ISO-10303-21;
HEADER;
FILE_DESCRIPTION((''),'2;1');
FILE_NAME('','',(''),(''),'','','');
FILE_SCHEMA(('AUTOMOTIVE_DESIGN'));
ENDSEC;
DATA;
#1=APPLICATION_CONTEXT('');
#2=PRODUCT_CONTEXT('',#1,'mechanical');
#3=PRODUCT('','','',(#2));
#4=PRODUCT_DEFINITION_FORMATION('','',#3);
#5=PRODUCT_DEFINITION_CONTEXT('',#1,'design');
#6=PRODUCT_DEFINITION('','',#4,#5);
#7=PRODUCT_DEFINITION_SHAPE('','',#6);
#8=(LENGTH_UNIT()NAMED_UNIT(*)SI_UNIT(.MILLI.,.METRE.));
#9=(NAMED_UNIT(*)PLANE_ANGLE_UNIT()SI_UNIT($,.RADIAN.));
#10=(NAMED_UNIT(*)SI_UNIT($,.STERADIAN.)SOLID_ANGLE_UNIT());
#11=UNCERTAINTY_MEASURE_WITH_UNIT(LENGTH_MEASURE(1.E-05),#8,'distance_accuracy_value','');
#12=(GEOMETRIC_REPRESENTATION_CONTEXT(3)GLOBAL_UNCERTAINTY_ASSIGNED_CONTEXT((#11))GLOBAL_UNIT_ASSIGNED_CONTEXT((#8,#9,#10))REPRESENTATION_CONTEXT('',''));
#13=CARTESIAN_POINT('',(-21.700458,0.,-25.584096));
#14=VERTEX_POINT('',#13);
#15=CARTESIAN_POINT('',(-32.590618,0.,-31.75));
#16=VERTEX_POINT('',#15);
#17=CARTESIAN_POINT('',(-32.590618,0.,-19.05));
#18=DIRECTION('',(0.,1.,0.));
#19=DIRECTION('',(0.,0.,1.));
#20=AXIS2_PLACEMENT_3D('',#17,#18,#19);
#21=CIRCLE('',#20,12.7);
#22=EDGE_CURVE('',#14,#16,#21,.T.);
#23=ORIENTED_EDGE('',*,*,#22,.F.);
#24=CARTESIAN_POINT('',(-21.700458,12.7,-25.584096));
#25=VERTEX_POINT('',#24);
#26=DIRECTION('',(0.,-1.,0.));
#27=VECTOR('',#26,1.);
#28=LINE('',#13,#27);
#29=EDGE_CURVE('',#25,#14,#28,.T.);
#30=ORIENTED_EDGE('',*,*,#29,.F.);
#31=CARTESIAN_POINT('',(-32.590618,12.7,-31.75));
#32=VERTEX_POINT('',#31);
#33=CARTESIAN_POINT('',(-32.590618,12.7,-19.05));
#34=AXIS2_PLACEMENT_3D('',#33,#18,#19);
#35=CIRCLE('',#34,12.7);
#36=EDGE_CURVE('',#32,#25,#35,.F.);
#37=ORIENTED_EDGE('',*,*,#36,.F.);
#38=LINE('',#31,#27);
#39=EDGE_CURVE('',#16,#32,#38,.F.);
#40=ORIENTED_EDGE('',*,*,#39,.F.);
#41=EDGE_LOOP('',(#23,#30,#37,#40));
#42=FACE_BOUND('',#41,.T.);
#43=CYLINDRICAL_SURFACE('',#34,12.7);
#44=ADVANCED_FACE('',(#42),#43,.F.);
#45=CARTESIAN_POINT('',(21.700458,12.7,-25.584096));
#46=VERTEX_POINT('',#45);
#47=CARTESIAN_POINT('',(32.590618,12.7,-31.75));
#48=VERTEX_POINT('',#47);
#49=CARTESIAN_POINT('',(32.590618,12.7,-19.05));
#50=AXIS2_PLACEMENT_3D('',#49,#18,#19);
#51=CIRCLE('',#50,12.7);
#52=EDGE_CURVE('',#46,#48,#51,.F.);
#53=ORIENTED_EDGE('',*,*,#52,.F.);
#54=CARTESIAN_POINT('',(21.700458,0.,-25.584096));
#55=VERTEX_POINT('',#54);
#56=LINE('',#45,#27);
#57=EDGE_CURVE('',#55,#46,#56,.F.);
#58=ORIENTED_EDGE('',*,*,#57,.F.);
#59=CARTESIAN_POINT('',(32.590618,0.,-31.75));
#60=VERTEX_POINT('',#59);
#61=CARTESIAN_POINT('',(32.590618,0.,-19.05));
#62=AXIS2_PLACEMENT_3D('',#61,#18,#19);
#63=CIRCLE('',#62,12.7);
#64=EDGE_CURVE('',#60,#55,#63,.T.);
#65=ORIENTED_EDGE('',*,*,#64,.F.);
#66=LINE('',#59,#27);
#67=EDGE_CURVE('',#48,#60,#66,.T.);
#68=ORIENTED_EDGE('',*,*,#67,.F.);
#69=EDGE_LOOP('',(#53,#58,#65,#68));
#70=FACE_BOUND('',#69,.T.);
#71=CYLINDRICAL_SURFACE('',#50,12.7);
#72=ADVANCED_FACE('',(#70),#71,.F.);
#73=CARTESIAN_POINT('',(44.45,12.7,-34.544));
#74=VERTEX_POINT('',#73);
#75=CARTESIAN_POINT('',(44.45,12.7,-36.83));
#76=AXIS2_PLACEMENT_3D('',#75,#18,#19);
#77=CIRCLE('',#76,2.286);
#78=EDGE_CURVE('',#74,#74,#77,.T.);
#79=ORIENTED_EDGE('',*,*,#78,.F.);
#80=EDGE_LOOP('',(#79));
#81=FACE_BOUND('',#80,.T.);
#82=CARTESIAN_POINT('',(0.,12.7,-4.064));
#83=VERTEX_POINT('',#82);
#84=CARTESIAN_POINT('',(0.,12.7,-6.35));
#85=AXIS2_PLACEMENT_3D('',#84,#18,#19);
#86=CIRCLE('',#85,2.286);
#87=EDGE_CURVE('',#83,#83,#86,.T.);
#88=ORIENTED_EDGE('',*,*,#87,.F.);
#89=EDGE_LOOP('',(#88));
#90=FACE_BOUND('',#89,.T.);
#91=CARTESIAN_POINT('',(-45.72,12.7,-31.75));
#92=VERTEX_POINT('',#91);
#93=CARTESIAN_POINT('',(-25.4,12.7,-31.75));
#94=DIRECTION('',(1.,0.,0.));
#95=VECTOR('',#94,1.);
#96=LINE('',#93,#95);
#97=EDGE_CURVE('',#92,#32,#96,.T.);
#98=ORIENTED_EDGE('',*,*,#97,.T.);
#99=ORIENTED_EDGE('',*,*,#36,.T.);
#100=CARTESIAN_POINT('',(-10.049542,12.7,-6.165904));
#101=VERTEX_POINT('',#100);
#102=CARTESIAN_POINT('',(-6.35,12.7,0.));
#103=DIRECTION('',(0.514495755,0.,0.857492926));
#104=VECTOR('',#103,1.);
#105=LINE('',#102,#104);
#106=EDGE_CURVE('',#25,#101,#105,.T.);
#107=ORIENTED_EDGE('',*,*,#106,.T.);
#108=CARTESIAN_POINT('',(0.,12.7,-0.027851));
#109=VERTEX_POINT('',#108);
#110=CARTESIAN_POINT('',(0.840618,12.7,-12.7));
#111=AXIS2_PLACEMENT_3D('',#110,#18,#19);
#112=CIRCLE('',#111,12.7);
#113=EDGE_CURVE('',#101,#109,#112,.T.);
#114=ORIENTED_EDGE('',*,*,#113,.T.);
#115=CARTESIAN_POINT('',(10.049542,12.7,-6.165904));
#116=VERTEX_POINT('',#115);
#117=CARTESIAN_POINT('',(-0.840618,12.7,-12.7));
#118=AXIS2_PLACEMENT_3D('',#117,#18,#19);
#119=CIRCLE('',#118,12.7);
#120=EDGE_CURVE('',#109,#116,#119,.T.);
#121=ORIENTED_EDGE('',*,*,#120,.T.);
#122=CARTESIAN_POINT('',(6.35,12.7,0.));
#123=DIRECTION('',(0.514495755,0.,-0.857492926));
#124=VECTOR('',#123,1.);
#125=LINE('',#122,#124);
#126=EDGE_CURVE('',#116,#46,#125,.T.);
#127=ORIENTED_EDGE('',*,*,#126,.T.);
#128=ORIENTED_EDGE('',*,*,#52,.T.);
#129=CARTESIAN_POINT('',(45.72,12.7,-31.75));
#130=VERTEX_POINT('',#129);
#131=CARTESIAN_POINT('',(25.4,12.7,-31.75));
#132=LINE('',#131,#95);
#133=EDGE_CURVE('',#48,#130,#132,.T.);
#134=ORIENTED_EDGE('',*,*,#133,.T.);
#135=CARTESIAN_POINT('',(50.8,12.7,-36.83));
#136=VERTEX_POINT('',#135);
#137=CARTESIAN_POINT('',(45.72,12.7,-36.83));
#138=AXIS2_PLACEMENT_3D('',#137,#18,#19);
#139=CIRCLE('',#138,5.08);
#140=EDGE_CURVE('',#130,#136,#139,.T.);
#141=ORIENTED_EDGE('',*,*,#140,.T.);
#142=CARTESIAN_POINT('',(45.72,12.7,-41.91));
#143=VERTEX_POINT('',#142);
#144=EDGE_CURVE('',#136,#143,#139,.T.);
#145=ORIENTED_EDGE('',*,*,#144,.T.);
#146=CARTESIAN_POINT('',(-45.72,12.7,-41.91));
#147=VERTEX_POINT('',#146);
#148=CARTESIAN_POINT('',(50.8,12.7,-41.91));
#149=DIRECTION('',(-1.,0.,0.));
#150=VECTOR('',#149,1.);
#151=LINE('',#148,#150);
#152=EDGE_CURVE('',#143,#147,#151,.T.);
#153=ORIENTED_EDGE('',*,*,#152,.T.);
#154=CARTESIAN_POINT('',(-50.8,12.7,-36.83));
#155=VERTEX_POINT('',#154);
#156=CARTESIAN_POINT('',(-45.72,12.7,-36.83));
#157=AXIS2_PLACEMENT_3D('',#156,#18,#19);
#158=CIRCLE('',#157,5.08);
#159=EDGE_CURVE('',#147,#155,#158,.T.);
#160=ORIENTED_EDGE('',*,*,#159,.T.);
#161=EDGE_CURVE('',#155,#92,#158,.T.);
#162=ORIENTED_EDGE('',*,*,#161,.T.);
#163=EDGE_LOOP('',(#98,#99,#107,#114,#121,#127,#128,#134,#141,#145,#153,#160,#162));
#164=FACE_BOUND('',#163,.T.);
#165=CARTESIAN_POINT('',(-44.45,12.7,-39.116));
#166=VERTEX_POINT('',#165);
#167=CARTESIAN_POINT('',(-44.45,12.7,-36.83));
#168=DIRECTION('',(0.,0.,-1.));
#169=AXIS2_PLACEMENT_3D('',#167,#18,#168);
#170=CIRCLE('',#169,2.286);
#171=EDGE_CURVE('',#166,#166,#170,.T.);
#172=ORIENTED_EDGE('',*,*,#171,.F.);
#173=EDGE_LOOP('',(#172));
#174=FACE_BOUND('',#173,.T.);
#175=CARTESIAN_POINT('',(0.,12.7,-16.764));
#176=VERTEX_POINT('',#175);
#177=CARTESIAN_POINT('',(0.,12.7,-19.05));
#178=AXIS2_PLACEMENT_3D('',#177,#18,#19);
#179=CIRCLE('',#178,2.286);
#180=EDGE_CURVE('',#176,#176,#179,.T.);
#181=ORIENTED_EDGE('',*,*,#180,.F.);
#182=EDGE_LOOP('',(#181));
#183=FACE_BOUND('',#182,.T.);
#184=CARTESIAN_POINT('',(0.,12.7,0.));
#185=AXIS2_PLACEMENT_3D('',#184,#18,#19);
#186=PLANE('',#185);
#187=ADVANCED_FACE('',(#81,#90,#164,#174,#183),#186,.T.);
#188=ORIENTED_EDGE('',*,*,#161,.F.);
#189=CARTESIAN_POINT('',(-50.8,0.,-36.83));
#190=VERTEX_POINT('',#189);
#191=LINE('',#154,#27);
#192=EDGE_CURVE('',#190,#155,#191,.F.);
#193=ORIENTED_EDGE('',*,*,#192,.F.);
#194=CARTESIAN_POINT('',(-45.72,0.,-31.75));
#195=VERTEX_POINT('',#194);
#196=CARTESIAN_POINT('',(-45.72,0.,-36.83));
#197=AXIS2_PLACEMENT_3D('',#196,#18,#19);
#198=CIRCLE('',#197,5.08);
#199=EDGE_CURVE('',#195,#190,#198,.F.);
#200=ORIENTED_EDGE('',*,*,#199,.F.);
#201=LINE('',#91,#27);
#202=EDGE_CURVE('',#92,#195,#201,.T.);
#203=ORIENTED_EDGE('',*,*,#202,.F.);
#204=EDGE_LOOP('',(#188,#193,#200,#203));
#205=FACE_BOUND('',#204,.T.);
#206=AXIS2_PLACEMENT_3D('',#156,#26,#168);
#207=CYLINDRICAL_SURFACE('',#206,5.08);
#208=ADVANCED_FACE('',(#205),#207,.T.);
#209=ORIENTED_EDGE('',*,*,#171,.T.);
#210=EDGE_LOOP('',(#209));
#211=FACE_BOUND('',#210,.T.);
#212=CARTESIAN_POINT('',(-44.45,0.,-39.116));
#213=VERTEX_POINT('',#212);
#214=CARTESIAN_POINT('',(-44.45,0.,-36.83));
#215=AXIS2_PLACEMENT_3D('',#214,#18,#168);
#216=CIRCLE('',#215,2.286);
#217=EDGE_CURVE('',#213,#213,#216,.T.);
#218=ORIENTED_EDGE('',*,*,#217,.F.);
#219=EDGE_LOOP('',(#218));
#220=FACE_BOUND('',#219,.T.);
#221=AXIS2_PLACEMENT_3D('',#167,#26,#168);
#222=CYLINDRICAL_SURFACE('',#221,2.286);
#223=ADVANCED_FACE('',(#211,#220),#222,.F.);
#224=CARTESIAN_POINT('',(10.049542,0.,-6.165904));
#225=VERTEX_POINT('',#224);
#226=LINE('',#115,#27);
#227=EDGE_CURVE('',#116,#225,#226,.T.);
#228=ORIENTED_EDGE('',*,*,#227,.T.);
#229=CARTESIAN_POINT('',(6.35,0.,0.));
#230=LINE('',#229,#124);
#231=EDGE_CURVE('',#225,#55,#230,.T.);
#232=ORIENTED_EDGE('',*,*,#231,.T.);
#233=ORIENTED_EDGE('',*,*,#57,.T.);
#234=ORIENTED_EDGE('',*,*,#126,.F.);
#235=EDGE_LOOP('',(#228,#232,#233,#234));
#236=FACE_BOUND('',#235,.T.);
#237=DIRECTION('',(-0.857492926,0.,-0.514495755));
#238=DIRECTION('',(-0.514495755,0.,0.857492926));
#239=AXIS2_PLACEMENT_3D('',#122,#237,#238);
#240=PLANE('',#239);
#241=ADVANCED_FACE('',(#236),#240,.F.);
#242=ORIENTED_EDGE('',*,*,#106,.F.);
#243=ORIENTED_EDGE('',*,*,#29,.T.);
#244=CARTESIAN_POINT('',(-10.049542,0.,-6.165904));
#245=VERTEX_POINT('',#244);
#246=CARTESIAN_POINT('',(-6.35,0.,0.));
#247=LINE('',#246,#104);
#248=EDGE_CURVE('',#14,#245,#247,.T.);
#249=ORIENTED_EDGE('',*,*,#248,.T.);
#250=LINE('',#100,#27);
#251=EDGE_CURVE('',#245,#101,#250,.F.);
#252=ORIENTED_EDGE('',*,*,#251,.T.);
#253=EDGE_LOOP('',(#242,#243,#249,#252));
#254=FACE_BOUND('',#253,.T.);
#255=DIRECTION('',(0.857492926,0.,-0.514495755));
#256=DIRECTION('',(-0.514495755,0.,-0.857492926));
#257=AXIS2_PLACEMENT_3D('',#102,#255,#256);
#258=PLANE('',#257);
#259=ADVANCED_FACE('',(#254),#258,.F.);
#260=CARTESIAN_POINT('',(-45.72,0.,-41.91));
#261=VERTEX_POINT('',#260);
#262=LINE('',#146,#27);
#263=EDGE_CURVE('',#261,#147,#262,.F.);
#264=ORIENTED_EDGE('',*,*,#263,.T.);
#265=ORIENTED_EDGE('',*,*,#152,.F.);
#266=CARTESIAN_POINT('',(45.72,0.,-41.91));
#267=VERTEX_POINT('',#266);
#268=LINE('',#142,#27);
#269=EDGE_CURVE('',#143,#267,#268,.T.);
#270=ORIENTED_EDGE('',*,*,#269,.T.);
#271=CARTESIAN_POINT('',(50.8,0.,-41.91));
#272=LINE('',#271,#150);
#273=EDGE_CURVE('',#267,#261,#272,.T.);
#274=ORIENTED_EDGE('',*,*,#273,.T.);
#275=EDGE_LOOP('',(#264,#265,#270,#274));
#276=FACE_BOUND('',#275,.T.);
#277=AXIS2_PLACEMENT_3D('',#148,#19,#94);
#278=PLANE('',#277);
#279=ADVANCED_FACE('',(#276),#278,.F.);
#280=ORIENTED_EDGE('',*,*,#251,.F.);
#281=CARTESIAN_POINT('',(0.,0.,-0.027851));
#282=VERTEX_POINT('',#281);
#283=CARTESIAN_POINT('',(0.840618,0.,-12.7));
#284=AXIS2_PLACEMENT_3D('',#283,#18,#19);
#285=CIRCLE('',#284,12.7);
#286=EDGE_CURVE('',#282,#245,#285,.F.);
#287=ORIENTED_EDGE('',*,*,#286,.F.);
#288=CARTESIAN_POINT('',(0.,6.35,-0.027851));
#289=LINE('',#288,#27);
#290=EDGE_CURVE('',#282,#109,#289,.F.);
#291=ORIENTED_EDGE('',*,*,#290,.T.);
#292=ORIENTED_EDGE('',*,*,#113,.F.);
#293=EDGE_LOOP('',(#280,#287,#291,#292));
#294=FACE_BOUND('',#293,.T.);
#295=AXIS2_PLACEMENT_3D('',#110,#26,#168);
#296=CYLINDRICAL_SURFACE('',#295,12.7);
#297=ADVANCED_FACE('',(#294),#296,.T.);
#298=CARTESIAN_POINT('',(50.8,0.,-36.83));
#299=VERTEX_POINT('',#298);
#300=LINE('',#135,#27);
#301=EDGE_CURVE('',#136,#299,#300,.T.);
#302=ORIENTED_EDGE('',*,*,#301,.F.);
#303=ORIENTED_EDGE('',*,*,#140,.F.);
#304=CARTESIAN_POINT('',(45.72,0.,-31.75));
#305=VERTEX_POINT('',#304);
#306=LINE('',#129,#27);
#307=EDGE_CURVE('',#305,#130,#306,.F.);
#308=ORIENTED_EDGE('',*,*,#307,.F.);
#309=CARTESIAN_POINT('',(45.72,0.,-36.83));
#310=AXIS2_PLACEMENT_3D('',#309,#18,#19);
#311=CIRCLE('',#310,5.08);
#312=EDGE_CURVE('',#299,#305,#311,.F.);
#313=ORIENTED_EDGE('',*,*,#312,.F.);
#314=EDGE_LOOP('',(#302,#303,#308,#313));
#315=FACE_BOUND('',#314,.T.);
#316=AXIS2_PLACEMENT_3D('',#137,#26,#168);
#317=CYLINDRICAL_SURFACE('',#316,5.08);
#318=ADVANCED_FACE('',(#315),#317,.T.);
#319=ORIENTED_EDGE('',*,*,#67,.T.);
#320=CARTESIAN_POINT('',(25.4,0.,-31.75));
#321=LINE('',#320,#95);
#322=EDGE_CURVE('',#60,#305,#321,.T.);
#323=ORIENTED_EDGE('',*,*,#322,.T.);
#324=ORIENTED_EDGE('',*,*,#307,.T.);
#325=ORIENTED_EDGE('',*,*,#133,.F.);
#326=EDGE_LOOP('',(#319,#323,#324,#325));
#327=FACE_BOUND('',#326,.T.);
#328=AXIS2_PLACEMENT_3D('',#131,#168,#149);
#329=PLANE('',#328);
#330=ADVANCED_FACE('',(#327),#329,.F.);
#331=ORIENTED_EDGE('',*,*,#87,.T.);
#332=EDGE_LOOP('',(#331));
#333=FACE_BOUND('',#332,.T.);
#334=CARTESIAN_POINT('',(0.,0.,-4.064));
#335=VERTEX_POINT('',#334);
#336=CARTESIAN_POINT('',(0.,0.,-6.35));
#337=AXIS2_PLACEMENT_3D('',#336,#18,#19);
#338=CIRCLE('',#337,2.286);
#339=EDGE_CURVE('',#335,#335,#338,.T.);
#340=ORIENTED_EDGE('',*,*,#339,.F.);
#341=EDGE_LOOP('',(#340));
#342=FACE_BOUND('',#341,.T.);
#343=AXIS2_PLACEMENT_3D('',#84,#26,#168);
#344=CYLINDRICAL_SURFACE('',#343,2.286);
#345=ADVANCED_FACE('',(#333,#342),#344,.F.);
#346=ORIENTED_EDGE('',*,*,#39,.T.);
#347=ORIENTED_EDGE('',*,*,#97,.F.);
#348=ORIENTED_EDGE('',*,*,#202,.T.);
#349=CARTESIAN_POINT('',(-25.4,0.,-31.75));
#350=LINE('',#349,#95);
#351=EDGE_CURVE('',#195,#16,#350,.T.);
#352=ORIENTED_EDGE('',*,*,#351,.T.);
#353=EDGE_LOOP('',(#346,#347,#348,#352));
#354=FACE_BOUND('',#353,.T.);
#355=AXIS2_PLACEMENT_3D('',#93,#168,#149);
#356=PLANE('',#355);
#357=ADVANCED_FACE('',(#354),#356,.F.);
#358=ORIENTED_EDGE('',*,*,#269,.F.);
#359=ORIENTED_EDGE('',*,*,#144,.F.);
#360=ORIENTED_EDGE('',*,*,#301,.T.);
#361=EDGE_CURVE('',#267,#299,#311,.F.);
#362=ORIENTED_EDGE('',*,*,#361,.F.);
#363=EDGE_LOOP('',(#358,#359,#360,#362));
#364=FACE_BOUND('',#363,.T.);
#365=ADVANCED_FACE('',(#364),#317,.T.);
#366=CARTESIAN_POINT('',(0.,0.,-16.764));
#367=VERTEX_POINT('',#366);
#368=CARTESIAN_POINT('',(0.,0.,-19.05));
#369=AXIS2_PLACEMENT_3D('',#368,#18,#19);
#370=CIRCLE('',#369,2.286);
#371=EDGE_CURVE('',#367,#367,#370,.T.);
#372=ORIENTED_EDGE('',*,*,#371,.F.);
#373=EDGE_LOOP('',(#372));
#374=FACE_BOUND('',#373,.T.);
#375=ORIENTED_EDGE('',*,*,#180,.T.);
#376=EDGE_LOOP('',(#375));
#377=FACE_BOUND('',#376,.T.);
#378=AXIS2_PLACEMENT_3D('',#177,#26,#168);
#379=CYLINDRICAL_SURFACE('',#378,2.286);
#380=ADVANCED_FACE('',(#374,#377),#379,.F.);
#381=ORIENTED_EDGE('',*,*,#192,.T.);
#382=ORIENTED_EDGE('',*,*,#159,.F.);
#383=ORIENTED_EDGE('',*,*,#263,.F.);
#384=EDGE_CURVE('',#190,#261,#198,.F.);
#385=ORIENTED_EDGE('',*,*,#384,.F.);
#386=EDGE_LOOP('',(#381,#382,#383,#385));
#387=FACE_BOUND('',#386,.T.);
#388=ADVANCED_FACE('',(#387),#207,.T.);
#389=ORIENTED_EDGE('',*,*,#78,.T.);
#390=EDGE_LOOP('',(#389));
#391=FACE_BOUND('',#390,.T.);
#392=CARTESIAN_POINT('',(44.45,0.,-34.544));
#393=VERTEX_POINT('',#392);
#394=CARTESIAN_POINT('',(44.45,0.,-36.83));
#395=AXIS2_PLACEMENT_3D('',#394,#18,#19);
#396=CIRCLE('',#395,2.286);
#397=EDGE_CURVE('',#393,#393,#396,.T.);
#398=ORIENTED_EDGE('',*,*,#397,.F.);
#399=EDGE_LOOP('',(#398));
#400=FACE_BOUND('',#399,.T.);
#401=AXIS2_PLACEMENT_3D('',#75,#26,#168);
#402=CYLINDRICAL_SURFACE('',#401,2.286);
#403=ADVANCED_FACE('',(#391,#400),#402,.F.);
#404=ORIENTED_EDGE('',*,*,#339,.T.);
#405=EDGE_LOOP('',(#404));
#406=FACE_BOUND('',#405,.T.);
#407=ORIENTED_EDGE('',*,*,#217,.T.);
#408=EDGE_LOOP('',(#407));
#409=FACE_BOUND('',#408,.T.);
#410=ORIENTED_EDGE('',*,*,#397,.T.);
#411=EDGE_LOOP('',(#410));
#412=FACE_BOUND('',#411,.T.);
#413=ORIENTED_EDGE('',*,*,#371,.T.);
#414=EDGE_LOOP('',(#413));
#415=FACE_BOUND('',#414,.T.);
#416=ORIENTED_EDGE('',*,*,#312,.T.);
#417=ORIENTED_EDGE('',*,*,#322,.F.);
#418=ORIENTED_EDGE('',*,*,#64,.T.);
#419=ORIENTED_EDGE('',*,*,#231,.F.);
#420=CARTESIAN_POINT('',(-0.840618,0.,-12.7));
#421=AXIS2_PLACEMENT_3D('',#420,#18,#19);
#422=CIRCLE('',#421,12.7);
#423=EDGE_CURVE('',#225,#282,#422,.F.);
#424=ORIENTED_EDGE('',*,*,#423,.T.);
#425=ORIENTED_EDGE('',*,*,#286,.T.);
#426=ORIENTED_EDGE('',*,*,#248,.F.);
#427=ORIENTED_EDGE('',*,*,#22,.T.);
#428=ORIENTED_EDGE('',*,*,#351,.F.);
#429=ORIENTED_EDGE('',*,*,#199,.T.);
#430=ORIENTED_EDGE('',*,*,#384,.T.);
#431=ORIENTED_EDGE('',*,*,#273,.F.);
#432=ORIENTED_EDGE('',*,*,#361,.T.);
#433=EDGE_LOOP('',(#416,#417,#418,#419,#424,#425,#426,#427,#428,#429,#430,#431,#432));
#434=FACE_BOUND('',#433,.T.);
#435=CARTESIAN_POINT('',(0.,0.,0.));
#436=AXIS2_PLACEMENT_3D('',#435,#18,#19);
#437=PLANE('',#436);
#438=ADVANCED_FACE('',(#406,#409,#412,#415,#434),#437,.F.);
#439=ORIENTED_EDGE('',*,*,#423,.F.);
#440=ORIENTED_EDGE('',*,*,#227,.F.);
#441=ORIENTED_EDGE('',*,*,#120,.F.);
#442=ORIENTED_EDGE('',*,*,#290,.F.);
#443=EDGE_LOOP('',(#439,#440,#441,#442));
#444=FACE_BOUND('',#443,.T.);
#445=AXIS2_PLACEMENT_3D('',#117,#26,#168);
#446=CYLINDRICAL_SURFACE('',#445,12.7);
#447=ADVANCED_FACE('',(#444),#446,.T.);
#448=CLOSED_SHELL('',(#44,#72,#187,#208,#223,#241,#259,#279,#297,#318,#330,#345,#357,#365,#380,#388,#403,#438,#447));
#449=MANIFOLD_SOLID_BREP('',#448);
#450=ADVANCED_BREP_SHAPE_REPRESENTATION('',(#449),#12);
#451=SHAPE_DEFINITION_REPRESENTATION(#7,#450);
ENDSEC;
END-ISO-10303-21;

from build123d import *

# Parameters (mm, degrees)
SKETCH2_R           = 2.286
BOSS_EXTRUDE2_DEPTH = 12.7
FILLET1_R           = 5.08
FILLET2_R           = 12.7


# Some blends are built 0.0001 mm under size
with BuildPart() as part:
    # Sketch2 → Boss-Extrude2 (new body)
    with BuildSketch(Plane(origin=(0, 0, 0), x_dir=(1, 0, 0), z_dir=(0, 1, 0))):
        Polygon((-6.35, 0), (6.35, 0), (25.4, 31.75), (50.8, 31.75), (50.8, 41.91), (-50.8, 41.91), (-50.8, 31.75), (-25.4, 31.75), align=None)
        with Locations(Location((0, 19.05, 0), (0, 0, 270))):
            Circle(SKETCH2_R, mode=Mode.SUBTRACT)
        with Locations(Location((0, 6.35, 0), (0, 0, 270))):
            Circle(SKETCH2_R, mode=Mode.SUBTRACT)
        with Locations(Location((44.45, 36.83, 0), (0, 0, 270))):
            Circle(SKETCH2_R, mode=Mode.SUBTRACT)
        with Locations(Location((-44.45, 36.83, 0), (0, 0, 90))):
            Circle(SKETCH2_R, mode=Mode.SUBTRACT)
    extrude(amount=BOSS_EXTRUDE2_DEPTH)

    # Fillet1
    fillet1_edges = [part.edges().sort_by_distance(p)[0] for p in [
        (50.8, 6.35, -41.91),
        (50.8, 6.35, -31.75),
        (-50.8, 6.35, -41.91),
        (-50.8, 6.35, -31.75),
    ]]
    fillet(fillet1_edges, radius=FILLET1_R - 0.0001)  # a hair under: the kernel refuses the full size

    # Fillet2
    # the kernel refuses this fillet: 12.7 mm, written as the material it adds along each edge
    with BuildSketch(Plane(origin=(-25.4, 0, -31.75), x_dir=(0.5144957554275261, 0, 0.8574929257125444), z_dir=(0, 1, 0)), Plane(origin=(25.4, 0, -31.75), x_dir=(1, 0, 0), z_dir=(0, 1, 0))) as fillet2_piece_1:
        with BuildLine():
            CenterArc((FILLET2_R * 0.566190378969, -FILLET2_R), FILLET2_R, 90, 59.036243468)
            Line((-FILLET2_R * 0.291302546743, -FILLET2_R * 0.485504244572), (0, 0))
            Line((0, 0), (FILLET2_R * 0.566190378969, 0))
        make_face()
    extrude(amount=12.7)
    # the kernel refuses this fillet: 12.7 mm, written as the material it takes off along each edge
    with BuildSketch(Plane(origin=(-6.35, -17.976544532, 0), x_dir=(1, 0, 0), z_dir=(0, 1, 0)), Plane(origin=(6.35, -17.976544532, 0), x_dir=(0.514495755427526, 0, -0.8574929257125444), z_dir=(0, 1, 0))) as fillet2_2_piece_1:
        with BuildLine():
            CenterArc((FILLET2_R * 0.566190378969, FILLET2_R), FILLET2_R, 210.963756532, 59.036243468)
            Line((-FILLET2_R * 0.291302546743, FILLET2_R * 0.485504244572), (0, 0))
            Line((0, 0), (FILLET2_R * 0.566190378969, 0))
        make_face()
    extrude(amount=48.653089065, mode=Mode.SUBTRACT)


solid = part.part
